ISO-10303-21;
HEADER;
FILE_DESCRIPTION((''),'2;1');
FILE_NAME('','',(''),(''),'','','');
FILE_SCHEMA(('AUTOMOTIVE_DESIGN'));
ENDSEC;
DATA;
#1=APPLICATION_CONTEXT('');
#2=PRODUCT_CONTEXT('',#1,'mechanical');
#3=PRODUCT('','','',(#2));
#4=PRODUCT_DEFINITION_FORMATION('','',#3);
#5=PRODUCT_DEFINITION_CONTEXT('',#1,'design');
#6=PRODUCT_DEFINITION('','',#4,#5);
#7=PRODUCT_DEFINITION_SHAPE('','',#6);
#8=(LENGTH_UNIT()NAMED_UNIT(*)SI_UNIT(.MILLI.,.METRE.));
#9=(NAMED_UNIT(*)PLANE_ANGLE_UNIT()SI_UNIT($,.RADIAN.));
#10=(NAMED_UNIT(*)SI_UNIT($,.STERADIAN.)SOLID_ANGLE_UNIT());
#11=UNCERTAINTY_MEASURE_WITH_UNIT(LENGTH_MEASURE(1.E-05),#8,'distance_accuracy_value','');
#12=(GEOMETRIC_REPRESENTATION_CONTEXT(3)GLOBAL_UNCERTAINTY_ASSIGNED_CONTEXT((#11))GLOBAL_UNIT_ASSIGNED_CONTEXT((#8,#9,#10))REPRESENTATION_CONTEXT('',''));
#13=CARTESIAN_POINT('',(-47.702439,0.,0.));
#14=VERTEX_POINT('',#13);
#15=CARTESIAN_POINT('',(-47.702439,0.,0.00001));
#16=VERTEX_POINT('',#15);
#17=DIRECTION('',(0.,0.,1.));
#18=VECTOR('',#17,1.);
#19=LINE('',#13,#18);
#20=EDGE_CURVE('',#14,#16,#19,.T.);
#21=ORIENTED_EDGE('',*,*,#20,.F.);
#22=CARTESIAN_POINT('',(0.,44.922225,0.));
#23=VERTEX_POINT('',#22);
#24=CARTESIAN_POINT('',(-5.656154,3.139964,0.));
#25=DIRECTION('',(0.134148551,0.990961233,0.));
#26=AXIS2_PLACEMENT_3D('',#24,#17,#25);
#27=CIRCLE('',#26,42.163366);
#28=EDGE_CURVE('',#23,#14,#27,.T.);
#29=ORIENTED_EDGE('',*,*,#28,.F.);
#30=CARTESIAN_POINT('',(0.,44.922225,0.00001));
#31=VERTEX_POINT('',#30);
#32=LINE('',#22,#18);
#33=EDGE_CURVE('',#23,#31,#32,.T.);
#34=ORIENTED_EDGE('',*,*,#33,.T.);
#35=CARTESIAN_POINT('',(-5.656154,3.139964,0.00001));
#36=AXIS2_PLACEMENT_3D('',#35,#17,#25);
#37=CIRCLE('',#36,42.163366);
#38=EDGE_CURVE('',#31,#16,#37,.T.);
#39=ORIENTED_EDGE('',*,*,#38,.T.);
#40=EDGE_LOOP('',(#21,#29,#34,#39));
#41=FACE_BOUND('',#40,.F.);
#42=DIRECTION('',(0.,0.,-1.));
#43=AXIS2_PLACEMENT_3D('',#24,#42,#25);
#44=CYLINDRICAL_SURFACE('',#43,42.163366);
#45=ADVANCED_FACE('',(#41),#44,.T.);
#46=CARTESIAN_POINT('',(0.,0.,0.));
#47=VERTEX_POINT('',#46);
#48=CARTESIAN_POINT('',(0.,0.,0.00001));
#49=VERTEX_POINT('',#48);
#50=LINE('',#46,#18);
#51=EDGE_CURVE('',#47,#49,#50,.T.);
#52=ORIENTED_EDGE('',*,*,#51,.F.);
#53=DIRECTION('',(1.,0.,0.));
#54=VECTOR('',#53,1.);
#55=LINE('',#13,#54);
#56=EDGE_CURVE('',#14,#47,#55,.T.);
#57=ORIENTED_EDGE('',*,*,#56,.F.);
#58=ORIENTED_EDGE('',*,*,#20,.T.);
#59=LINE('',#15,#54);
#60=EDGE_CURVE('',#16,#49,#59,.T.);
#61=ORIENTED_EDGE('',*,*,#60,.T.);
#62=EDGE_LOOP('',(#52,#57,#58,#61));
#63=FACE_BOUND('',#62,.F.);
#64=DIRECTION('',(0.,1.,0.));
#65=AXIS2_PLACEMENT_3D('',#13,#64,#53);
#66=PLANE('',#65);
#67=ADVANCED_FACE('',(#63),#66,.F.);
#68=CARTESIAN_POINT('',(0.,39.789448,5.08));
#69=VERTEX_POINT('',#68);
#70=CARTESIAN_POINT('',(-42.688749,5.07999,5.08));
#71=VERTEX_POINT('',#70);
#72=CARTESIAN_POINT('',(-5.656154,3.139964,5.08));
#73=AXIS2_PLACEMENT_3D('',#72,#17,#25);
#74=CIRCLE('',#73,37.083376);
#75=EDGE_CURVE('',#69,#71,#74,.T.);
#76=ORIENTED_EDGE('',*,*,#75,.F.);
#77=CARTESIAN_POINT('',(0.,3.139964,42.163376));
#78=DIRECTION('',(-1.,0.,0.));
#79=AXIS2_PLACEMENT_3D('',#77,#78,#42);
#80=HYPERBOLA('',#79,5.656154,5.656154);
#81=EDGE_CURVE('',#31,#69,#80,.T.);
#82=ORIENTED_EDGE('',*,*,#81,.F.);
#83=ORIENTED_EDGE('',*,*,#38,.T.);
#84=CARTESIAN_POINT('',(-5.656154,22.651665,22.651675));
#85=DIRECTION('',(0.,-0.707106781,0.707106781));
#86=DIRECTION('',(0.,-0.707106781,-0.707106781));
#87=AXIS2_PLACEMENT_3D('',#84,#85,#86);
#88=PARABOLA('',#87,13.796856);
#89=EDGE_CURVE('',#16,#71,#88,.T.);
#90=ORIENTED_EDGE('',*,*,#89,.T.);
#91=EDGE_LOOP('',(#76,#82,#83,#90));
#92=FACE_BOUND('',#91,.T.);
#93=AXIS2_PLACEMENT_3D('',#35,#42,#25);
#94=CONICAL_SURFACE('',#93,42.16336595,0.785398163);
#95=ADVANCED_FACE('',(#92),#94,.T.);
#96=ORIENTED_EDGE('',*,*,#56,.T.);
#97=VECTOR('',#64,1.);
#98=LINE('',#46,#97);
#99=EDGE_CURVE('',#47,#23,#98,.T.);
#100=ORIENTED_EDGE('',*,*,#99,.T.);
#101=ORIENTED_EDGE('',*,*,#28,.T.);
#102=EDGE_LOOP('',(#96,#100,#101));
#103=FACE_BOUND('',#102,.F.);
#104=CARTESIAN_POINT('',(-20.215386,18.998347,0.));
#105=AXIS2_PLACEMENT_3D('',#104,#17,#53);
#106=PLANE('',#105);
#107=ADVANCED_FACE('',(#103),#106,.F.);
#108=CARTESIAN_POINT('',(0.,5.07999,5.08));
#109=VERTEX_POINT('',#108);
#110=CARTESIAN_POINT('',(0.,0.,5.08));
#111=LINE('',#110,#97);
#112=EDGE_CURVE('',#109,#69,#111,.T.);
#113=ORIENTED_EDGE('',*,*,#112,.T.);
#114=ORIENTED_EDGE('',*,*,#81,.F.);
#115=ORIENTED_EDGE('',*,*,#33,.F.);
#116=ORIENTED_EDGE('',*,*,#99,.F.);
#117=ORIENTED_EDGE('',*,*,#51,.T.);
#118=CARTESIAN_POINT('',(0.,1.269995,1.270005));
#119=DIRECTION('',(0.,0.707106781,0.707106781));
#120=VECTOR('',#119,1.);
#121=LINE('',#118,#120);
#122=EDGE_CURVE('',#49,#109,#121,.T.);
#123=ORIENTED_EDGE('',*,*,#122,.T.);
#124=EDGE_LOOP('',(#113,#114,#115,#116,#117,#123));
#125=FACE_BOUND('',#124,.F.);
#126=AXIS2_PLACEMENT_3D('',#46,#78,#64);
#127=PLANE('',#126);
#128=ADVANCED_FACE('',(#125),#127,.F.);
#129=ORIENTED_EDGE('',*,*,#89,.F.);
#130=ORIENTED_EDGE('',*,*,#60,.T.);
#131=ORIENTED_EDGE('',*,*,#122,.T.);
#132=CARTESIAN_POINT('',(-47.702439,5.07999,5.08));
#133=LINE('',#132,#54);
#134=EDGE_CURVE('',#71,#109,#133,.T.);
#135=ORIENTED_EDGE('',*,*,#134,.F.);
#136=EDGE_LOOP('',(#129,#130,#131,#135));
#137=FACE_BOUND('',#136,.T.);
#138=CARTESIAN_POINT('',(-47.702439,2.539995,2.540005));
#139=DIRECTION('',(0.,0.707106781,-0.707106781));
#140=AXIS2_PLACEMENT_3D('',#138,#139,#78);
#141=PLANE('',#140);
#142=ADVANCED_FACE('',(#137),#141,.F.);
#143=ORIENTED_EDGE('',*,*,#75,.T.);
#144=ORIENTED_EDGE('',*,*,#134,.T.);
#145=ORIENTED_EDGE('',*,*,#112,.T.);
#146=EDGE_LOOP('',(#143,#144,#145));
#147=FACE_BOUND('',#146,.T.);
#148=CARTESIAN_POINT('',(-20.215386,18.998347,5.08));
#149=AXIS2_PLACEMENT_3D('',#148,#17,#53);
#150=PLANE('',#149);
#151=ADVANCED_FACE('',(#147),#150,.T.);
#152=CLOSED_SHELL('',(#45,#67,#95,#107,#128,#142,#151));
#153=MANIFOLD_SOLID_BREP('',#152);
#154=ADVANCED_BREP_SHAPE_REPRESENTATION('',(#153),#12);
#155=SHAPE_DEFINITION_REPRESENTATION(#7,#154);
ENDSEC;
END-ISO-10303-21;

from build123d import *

# Parameters (mm, degrees)
F1_DEPTH = 5.08
F2_SIZE  = 5.07999


# Not quite as in the source:
# - a fillet or chamfer is up to 0.001 mm smaller than in the source, because OpenCascade refuses the exact size


with BuildPart() as f1:
    # F0 (on Top) → F1 (new body)
    with BuildSketch(Plane.XY):
        with BuildLine():
            Line((0, 0), (0, 44.9222251773))
            ThreePointArc((0, 44.9222251773), (-34.5622433169, 33.8350362208), (-47.7024391294, 0))
            Line((-47.7024391294, 0), (0, 0))
        make_face()
    extrude(amount=F1_DEPTH)

    # F2 (size 5.08 in the source; OpenCascade refuses exactly that, so slightly less here)
    f2_edges = [f1.edges().sort_by_distance(p)[0] for p in [
        (-34.562243, 33.835036, 5.08),
        (-23.85122, 0, 5.08),
    ]]
    chamfer(f2_edges, length=F2_SIZE)


solid = f1.part
